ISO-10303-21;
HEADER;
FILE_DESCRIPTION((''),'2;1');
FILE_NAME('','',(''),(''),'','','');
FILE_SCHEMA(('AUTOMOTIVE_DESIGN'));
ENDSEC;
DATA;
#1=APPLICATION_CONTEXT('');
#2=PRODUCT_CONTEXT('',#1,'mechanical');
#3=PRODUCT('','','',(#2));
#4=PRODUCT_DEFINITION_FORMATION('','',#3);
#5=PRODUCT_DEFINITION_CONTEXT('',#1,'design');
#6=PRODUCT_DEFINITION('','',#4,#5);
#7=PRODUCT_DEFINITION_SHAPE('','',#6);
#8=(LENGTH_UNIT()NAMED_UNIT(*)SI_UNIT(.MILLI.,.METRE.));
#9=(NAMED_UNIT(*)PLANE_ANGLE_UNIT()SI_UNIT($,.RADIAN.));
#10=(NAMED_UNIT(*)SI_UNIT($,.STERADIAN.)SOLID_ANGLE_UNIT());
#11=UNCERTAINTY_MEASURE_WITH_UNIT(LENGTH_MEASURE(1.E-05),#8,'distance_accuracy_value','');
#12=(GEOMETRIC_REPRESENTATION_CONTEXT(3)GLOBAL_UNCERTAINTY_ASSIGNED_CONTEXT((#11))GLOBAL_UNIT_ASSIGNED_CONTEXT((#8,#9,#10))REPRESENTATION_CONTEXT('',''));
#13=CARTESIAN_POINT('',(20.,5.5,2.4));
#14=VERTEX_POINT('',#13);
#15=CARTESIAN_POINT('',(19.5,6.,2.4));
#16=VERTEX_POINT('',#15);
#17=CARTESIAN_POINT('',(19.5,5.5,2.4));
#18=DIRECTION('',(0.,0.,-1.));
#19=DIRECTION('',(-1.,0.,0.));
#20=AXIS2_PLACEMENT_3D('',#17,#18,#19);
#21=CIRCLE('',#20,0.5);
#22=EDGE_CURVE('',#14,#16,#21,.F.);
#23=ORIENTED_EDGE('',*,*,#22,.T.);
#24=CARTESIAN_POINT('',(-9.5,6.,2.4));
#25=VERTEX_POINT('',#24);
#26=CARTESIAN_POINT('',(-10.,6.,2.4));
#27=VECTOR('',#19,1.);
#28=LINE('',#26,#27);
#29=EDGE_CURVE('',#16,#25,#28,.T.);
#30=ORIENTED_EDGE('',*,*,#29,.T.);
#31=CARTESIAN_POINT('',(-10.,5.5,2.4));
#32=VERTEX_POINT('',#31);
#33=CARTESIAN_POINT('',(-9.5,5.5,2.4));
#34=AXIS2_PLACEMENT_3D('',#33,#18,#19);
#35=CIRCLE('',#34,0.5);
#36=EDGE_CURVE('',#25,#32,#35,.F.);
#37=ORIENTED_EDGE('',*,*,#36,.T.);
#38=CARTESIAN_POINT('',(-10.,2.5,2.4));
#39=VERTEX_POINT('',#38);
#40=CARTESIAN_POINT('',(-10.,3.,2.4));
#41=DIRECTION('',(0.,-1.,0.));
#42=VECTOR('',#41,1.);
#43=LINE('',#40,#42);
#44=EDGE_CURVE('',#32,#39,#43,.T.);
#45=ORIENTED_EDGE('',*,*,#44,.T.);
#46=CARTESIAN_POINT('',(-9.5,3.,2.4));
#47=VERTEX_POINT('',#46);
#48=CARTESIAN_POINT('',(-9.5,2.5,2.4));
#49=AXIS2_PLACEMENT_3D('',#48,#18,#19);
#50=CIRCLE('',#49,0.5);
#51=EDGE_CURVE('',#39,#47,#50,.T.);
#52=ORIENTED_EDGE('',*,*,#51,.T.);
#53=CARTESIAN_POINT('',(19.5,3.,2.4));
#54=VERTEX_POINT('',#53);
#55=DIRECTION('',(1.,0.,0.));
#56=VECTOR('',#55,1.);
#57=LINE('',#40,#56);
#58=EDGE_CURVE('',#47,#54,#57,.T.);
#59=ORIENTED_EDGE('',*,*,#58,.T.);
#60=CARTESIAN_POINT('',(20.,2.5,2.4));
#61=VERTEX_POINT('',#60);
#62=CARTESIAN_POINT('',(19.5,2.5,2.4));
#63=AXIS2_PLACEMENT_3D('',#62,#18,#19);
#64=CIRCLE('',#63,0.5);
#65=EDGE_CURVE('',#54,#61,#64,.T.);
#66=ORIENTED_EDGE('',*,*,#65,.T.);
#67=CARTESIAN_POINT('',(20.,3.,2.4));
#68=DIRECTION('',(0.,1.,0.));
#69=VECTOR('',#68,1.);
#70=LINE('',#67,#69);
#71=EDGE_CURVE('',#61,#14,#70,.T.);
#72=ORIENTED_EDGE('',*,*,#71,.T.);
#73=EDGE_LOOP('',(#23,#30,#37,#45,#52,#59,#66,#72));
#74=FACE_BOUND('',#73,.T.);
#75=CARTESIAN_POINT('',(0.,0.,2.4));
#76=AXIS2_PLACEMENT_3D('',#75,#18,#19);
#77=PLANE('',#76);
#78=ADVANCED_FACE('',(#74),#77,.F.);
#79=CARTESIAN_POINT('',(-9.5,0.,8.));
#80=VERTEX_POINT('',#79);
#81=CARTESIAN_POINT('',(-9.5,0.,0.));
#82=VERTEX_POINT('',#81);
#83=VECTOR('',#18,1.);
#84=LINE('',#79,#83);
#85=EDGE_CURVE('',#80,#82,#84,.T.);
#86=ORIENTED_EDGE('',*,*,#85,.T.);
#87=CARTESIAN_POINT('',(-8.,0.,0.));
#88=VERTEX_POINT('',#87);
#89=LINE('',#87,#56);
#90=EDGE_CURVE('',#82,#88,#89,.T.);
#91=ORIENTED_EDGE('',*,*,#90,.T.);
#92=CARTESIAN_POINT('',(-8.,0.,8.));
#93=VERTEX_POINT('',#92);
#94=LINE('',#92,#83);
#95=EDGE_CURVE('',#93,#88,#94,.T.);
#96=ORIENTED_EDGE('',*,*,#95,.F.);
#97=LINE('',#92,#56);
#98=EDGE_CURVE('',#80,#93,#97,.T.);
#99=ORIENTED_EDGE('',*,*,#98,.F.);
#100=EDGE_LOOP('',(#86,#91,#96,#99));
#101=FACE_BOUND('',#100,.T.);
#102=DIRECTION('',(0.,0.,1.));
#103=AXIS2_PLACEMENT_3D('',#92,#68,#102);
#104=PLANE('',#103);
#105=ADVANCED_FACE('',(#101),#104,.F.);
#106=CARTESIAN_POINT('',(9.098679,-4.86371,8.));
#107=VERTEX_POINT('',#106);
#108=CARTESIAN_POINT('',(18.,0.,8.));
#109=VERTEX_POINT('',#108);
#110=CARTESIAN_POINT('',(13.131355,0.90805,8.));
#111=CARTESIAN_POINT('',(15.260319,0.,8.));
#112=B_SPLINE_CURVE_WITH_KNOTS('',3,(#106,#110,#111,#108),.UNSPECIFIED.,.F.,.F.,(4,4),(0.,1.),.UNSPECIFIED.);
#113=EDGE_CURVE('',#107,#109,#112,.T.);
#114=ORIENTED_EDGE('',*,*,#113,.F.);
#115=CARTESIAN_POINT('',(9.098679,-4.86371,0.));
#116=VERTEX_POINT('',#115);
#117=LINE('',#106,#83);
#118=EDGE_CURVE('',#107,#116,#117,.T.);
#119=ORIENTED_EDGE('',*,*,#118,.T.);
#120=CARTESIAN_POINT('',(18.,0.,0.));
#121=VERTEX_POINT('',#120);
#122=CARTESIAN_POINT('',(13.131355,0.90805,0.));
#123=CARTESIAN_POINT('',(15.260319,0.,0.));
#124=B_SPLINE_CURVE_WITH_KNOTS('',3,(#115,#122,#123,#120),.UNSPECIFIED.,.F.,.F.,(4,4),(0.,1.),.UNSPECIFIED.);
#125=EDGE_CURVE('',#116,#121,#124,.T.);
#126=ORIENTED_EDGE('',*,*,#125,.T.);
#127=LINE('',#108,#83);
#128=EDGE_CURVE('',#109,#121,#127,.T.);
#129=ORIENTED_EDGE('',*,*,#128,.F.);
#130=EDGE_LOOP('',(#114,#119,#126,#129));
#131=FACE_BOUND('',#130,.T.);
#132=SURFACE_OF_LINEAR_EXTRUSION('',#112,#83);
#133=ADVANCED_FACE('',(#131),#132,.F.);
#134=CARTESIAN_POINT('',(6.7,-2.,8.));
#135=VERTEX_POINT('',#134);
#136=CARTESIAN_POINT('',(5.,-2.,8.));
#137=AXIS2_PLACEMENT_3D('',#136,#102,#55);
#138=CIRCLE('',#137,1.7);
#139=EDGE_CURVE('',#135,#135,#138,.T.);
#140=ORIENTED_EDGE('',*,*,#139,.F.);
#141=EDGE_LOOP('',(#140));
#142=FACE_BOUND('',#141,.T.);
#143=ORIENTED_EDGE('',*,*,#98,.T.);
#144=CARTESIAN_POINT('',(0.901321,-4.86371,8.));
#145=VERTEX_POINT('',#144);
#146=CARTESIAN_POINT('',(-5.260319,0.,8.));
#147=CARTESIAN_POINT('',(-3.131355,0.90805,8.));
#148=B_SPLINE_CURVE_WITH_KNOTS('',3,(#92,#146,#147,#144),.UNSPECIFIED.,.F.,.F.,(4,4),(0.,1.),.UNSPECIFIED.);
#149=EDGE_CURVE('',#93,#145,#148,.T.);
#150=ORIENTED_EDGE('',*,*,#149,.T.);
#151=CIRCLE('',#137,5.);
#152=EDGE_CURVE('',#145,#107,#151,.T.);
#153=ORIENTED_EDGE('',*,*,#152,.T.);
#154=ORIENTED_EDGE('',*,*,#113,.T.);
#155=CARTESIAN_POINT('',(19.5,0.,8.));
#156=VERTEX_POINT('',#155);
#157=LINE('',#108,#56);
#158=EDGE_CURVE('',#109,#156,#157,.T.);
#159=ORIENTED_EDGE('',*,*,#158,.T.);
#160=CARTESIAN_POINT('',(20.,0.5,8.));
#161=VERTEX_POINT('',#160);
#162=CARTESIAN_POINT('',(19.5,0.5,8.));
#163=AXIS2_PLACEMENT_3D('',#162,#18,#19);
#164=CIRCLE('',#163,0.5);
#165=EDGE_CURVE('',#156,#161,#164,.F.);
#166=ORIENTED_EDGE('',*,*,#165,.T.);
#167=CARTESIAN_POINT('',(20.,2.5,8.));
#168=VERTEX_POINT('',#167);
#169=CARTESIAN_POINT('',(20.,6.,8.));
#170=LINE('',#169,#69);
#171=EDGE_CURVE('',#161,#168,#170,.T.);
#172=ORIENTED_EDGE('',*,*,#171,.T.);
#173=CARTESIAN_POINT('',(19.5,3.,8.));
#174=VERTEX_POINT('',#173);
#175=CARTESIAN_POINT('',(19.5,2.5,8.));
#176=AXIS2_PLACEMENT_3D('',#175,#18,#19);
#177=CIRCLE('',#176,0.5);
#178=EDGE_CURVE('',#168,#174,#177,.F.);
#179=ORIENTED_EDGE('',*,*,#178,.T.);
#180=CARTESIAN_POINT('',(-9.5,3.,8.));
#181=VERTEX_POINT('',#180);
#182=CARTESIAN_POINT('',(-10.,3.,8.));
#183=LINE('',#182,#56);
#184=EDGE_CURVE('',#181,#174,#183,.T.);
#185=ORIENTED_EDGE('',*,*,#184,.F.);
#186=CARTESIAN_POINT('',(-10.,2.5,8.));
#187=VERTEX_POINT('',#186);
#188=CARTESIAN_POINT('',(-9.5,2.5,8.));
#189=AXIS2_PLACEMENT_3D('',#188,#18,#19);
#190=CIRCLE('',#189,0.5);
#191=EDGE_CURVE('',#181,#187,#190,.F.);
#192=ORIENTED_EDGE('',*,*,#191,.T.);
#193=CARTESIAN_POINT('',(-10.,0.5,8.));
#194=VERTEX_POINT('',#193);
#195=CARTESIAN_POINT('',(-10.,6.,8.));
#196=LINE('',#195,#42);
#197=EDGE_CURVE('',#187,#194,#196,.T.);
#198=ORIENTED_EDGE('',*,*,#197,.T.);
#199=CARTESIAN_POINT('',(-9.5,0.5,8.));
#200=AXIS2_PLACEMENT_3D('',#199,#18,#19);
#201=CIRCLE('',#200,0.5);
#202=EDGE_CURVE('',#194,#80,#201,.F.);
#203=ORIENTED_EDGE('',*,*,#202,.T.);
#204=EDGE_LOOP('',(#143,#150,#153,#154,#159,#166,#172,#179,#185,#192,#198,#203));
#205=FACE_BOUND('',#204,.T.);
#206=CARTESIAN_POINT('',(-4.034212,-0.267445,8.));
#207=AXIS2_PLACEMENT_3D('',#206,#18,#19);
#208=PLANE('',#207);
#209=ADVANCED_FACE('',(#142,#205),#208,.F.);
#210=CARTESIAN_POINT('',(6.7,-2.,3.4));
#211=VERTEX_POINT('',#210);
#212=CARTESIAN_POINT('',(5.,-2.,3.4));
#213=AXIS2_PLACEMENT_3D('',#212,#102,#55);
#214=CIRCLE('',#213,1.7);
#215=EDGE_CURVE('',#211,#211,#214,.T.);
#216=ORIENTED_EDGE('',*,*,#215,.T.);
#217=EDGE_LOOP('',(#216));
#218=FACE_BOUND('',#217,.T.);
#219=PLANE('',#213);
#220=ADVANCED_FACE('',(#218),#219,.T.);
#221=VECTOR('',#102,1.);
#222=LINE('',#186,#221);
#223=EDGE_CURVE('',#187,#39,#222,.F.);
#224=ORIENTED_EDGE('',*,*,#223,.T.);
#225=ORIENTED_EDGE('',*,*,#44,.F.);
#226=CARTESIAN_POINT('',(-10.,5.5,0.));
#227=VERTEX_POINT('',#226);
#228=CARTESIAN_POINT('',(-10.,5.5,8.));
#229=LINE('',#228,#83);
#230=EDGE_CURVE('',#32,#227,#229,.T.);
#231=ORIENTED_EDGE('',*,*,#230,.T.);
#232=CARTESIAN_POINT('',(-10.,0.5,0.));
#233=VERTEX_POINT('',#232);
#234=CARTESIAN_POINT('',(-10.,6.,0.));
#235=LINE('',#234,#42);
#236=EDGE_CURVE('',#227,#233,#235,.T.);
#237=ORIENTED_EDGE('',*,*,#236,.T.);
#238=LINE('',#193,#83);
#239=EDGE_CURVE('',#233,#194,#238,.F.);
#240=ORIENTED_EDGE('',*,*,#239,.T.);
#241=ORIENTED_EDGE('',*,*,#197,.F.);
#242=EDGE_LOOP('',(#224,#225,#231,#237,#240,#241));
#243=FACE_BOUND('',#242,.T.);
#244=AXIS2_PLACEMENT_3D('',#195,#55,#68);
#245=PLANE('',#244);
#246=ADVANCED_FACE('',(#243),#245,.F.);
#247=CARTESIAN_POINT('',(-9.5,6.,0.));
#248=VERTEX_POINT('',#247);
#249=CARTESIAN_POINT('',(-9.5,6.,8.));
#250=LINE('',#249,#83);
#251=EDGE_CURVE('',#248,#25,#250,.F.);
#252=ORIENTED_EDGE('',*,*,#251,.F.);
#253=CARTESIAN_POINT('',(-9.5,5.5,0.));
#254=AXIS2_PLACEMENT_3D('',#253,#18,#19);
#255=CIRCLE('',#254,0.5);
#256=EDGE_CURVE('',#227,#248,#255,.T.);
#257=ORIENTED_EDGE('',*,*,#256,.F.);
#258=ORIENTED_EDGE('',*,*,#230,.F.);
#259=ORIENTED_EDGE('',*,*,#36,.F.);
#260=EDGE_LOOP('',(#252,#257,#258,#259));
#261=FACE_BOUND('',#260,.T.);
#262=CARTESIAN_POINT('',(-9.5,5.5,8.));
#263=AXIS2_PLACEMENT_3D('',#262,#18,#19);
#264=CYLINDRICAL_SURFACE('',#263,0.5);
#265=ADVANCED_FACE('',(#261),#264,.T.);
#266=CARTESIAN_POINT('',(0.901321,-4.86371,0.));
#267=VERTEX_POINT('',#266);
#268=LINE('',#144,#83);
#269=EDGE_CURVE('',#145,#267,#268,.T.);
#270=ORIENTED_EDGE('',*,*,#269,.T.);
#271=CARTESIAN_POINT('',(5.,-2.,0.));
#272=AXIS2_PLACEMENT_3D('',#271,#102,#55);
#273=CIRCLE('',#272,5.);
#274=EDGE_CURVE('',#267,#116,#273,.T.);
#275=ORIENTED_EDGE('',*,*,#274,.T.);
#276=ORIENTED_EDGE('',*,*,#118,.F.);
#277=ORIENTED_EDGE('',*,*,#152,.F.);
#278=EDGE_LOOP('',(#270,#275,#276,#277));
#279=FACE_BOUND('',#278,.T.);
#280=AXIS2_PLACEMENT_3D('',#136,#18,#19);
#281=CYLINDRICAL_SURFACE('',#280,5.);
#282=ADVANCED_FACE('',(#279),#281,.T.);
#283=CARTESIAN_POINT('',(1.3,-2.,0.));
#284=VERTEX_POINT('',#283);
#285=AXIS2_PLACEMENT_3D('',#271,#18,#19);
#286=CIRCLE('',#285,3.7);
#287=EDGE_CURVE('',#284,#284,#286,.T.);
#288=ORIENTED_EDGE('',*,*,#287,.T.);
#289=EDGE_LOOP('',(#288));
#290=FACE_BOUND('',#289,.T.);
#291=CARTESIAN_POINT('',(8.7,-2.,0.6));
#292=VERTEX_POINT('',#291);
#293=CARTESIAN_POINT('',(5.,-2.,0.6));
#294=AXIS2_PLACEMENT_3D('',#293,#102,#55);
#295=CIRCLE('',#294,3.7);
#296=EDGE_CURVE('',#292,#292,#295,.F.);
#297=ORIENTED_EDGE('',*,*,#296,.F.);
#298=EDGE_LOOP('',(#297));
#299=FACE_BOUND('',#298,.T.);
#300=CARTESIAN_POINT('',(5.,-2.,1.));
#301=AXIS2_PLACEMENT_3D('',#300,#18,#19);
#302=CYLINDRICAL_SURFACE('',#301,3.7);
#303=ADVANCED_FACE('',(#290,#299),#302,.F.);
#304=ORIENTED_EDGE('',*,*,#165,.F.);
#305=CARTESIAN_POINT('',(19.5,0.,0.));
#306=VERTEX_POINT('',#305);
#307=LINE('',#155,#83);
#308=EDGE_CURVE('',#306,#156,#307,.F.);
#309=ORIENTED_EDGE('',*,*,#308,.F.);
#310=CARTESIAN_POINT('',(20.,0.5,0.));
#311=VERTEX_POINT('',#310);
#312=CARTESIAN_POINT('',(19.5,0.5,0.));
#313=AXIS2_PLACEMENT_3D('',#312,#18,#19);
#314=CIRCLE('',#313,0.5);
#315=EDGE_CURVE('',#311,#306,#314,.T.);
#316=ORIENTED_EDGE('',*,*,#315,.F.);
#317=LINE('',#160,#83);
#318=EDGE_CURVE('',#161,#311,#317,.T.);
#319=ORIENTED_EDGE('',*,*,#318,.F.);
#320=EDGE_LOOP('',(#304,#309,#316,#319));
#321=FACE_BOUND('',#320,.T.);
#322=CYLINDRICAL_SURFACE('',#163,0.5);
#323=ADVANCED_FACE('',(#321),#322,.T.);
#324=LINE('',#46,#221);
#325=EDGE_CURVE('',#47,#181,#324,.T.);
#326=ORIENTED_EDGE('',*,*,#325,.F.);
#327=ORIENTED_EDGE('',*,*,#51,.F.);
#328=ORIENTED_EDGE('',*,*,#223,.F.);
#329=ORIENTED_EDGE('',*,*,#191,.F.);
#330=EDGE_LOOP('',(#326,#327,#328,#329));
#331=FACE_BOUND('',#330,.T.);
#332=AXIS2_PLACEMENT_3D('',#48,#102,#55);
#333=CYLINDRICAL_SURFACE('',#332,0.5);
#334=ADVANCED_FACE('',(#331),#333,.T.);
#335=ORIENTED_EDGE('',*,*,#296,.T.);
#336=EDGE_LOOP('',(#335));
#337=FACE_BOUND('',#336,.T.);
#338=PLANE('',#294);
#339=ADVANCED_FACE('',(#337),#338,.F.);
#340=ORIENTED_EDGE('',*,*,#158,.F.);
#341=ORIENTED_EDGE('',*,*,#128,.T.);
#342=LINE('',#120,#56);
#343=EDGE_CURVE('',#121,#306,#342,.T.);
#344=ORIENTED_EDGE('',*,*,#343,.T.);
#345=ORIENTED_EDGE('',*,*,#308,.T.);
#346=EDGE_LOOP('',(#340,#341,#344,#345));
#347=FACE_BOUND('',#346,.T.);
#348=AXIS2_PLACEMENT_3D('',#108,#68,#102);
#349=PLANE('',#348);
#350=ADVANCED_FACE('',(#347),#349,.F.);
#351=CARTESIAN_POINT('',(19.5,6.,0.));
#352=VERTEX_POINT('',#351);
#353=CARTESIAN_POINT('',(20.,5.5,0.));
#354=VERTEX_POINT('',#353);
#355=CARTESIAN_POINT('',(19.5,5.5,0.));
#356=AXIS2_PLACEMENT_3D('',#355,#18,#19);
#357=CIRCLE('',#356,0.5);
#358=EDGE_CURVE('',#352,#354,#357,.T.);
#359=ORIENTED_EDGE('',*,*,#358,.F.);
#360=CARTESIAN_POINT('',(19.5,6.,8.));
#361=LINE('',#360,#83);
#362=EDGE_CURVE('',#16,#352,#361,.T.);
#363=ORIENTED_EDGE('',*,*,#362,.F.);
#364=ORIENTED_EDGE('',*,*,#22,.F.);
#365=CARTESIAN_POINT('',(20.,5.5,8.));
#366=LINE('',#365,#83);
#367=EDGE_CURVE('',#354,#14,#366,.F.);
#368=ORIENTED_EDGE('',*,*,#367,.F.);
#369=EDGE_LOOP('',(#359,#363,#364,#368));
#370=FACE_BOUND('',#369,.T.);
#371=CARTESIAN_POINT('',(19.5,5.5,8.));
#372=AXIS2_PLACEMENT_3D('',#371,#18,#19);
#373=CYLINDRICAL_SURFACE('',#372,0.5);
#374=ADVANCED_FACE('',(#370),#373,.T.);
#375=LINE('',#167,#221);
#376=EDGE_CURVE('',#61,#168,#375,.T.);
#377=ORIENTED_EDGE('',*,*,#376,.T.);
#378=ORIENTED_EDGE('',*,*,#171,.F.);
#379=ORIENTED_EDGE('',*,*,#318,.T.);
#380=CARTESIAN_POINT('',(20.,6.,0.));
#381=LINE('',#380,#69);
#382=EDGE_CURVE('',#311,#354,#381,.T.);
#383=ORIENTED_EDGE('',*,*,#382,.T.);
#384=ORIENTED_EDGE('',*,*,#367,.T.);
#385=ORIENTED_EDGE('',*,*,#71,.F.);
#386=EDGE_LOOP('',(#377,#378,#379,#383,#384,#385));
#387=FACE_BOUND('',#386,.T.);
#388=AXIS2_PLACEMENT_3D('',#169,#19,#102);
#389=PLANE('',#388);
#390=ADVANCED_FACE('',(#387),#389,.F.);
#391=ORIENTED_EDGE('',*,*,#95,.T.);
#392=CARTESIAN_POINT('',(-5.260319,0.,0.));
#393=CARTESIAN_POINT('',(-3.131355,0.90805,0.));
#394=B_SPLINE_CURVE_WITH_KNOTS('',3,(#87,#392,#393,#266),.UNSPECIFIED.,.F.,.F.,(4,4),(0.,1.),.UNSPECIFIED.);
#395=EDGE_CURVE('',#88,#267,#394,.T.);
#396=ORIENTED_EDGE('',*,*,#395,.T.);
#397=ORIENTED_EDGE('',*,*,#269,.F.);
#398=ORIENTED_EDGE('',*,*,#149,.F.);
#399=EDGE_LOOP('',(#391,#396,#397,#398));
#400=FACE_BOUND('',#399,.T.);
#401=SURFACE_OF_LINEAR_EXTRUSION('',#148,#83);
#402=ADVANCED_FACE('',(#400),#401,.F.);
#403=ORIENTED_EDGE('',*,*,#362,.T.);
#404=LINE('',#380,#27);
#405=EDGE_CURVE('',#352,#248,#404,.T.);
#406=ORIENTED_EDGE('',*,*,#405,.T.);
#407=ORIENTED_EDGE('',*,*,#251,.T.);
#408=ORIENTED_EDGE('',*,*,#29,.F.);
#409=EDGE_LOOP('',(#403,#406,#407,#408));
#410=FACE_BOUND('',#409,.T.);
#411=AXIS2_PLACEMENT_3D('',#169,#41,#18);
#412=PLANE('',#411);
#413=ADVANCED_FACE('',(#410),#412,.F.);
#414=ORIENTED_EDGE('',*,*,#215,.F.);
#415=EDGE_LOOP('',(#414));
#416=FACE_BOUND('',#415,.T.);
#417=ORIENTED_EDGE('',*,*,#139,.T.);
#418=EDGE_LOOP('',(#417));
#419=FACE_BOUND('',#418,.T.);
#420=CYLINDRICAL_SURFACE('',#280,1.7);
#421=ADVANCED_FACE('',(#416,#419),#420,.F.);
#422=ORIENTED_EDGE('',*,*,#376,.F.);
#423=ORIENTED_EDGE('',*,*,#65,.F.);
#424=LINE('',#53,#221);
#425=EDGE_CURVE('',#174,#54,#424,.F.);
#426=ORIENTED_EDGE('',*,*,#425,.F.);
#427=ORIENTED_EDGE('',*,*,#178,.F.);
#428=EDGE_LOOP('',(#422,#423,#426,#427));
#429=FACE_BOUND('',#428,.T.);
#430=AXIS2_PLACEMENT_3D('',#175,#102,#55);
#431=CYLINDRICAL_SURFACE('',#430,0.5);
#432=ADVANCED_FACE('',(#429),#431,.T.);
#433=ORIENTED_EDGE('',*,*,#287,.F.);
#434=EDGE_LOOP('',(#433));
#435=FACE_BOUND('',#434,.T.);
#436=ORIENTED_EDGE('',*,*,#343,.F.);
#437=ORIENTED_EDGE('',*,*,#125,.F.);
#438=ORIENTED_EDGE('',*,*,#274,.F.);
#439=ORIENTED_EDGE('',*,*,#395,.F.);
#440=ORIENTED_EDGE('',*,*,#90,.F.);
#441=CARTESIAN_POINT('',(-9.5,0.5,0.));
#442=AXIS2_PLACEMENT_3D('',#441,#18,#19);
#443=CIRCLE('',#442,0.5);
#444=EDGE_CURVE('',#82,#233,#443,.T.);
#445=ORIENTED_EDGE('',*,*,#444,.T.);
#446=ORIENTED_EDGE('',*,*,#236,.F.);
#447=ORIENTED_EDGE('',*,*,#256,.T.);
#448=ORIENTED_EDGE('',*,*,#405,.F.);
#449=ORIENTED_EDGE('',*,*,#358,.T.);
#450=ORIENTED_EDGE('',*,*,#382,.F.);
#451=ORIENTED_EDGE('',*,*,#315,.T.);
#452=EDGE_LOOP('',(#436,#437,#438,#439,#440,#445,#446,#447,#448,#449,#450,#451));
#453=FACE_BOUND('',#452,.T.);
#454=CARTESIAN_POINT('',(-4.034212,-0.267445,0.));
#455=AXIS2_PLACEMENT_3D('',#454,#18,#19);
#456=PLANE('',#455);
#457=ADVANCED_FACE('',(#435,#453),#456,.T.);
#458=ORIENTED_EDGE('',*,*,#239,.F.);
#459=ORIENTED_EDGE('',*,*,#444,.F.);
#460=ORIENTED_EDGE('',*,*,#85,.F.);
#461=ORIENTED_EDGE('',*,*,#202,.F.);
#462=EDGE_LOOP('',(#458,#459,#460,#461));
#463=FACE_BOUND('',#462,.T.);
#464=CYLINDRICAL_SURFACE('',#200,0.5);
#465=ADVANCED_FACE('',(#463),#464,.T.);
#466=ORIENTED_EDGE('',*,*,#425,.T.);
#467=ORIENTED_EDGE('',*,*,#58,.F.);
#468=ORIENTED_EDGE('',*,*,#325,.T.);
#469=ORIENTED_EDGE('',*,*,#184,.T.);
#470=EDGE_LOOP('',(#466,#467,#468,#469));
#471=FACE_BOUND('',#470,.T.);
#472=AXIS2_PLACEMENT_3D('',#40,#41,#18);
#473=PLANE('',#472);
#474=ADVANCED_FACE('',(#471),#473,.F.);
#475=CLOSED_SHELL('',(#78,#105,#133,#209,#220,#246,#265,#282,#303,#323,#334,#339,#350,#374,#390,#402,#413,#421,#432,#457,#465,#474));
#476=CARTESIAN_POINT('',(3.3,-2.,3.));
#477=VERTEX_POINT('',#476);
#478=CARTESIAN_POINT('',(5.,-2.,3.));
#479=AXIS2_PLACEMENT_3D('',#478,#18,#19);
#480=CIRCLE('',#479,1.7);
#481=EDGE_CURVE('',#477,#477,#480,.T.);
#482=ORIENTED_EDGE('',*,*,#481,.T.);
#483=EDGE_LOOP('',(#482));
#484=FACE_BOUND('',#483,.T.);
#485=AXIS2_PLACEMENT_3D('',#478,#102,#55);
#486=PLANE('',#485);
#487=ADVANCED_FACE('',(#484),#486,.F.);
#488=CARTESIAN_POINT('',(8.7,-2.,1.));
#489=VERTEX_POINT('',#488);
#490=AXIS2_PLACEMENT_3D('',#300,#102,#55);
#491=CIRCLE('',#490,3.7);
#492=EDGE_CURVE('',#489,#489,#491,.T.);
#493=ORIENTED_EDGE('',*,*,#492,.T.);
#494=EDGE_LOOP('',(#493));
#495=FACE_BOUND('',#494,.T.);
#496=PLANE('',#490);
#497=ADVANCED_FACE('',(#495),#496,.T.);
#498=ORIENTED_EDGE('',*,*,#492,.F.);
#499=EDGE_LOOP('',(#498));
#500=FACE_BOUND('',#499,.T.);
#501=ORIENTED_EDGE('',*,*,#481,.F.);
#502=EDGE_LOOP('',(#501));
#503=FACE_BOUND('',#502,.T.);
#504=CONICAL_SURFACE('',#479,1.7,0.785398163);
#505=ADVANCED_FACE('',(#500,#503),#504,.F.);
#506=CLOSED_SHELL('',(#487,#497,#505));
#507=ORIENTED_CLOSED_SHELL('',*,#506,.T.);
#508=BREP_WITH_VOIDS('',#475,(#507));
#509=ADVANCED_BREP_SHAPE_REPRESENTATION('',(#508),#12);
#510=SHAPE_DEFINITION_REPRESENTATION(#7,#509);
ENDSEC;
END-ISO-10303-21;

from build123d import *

# Parameters (mm, degrees)
SKETCH1_R           = 1.7
BOSS_EXTRUDE1_DEPTH = 8
SKETCH2_W           = 30
SKETCH2_H           = 3
CUT_EXTRUDE1_DEPTH  = 5.6
FILLET1_R           = 0.5
SKETCH5_R           = 3.7
CUT_EXTRUDE2_DEPTH  = 1
CHAMFER1_SIZE       = 2
SKETCH6_R           = 1.7
BOSS_EXTRUDE2_DEPTH = 0.4
BOSS_EXTRUDE3_START = -0.4
SKETCH7_R           = 3.7
BOSS_EXTRUDE3_DEPTH = 0.4


with BuildPart() as part:
    # Sketch1 → Boss-Extrude1 (new body)
    with BuildSketch(Plane.XY):
        with BuildLine():
            Line((20, 6), (20, 0))
            Line((20, 0), (18, 0))
            add(Edge.make_bspline(
                [(18, 0), (15.260318753, 0), (13.131354564, 0.908049894), (9.098678762, -4.863709553)],
                knots=[0, 0, 0, 0, 1, 1, 1, 1], degree=3))
            ThreePointArc((9.098678762, -4.863709553), (5, -7), (0.901321238, -4.863709553))
            add(Edge.make_bspline(
                [(-8, 0), (-5.260318753, 0), (-3.131354564, 0.908049894), (0.901321238, -4.863709553)],
                knots=[0, 0, 0, 0, 1, 1, 1, 1], degree=3))
            Line((-8, 0), (-10, 0))
            Line((-10, 0), (-10, 6))
            Line((-10, 6), (20, 6))
        make_face()
        with Locations((5, -2)):
            Circle(SKETCH1_R, mode=Mode.SUBTRACT)
    extrude(amount=BOSS_EXTRUDE1_DEPTH)

    # Sketch2 → Cut-Extrude1 (cut)
    with BuildSketch(Plane.XY.offset(8)):
        with Locations((5, 4.5)):
            Rectangle(SKETCH2_W, SKETCH2_H)
    extrude(amount=-CUT_EXTRUDE1_DEPTH, mode=Mode.SUBTRACT)

    # Fillet1
    fillet1_edges = [part.edges().sort_by_distance(p)[0] for p in [
        (20, 0, 4),
        (-10, 0, 4),
        (20, 6, 1.2),
        (-10, 6, 1.2),
        (20, 3, 5.2),
        (-10, 3, 5.2),
    ]]
    fillet(fillet1_edges, radius=FILLET1_R)

    # Sketch5 → Cut-Extrude2 (cut)
    with BuildSketch(Plane(origin=(0, 0, 0), x_dir=(-1, 0, 0), z_dir=(0, 0, -1))):
        with Locations((-5, -2)):
            Circle(SKETCH5_R)
    extrude(amount=-CUT_EXTRUDE2_DEPTH, mode=Mode.SUBTRACT)

    # Chamfer1
    chamfer1_edges = [part.edges().sort_by_distance(p)[0] for p in [
        (3.3, -2, 1),
    ]]
    chamfer(chamfer1_edges, length=CHAMFER1_SIZE - 0.0001)  # a hair under: the kernel refuses the full size

    # Sketch6 → Boss-Extrude2 (add)
    with BuildSketch(Plane.XY.offset(3)):
        with Locations((5, -2)):
            Circle(SKETCH6_R)
    extrude(amount=BOSS_EXTRUDE2_DEPTH)

    # Sketch7 → Boss-Extrude3 (add)
    with BuildSketch(Plane.XY.offset(1).offset(BOSS_EXTRUDE3_START)):
        with Locations(Location((5, -2, 0), (0, 0, 180))):
            Circle(SKETCH7_R)
    extrude(amount=BOSS_EXTRUDE3_DEPTH)


solid = part.part
